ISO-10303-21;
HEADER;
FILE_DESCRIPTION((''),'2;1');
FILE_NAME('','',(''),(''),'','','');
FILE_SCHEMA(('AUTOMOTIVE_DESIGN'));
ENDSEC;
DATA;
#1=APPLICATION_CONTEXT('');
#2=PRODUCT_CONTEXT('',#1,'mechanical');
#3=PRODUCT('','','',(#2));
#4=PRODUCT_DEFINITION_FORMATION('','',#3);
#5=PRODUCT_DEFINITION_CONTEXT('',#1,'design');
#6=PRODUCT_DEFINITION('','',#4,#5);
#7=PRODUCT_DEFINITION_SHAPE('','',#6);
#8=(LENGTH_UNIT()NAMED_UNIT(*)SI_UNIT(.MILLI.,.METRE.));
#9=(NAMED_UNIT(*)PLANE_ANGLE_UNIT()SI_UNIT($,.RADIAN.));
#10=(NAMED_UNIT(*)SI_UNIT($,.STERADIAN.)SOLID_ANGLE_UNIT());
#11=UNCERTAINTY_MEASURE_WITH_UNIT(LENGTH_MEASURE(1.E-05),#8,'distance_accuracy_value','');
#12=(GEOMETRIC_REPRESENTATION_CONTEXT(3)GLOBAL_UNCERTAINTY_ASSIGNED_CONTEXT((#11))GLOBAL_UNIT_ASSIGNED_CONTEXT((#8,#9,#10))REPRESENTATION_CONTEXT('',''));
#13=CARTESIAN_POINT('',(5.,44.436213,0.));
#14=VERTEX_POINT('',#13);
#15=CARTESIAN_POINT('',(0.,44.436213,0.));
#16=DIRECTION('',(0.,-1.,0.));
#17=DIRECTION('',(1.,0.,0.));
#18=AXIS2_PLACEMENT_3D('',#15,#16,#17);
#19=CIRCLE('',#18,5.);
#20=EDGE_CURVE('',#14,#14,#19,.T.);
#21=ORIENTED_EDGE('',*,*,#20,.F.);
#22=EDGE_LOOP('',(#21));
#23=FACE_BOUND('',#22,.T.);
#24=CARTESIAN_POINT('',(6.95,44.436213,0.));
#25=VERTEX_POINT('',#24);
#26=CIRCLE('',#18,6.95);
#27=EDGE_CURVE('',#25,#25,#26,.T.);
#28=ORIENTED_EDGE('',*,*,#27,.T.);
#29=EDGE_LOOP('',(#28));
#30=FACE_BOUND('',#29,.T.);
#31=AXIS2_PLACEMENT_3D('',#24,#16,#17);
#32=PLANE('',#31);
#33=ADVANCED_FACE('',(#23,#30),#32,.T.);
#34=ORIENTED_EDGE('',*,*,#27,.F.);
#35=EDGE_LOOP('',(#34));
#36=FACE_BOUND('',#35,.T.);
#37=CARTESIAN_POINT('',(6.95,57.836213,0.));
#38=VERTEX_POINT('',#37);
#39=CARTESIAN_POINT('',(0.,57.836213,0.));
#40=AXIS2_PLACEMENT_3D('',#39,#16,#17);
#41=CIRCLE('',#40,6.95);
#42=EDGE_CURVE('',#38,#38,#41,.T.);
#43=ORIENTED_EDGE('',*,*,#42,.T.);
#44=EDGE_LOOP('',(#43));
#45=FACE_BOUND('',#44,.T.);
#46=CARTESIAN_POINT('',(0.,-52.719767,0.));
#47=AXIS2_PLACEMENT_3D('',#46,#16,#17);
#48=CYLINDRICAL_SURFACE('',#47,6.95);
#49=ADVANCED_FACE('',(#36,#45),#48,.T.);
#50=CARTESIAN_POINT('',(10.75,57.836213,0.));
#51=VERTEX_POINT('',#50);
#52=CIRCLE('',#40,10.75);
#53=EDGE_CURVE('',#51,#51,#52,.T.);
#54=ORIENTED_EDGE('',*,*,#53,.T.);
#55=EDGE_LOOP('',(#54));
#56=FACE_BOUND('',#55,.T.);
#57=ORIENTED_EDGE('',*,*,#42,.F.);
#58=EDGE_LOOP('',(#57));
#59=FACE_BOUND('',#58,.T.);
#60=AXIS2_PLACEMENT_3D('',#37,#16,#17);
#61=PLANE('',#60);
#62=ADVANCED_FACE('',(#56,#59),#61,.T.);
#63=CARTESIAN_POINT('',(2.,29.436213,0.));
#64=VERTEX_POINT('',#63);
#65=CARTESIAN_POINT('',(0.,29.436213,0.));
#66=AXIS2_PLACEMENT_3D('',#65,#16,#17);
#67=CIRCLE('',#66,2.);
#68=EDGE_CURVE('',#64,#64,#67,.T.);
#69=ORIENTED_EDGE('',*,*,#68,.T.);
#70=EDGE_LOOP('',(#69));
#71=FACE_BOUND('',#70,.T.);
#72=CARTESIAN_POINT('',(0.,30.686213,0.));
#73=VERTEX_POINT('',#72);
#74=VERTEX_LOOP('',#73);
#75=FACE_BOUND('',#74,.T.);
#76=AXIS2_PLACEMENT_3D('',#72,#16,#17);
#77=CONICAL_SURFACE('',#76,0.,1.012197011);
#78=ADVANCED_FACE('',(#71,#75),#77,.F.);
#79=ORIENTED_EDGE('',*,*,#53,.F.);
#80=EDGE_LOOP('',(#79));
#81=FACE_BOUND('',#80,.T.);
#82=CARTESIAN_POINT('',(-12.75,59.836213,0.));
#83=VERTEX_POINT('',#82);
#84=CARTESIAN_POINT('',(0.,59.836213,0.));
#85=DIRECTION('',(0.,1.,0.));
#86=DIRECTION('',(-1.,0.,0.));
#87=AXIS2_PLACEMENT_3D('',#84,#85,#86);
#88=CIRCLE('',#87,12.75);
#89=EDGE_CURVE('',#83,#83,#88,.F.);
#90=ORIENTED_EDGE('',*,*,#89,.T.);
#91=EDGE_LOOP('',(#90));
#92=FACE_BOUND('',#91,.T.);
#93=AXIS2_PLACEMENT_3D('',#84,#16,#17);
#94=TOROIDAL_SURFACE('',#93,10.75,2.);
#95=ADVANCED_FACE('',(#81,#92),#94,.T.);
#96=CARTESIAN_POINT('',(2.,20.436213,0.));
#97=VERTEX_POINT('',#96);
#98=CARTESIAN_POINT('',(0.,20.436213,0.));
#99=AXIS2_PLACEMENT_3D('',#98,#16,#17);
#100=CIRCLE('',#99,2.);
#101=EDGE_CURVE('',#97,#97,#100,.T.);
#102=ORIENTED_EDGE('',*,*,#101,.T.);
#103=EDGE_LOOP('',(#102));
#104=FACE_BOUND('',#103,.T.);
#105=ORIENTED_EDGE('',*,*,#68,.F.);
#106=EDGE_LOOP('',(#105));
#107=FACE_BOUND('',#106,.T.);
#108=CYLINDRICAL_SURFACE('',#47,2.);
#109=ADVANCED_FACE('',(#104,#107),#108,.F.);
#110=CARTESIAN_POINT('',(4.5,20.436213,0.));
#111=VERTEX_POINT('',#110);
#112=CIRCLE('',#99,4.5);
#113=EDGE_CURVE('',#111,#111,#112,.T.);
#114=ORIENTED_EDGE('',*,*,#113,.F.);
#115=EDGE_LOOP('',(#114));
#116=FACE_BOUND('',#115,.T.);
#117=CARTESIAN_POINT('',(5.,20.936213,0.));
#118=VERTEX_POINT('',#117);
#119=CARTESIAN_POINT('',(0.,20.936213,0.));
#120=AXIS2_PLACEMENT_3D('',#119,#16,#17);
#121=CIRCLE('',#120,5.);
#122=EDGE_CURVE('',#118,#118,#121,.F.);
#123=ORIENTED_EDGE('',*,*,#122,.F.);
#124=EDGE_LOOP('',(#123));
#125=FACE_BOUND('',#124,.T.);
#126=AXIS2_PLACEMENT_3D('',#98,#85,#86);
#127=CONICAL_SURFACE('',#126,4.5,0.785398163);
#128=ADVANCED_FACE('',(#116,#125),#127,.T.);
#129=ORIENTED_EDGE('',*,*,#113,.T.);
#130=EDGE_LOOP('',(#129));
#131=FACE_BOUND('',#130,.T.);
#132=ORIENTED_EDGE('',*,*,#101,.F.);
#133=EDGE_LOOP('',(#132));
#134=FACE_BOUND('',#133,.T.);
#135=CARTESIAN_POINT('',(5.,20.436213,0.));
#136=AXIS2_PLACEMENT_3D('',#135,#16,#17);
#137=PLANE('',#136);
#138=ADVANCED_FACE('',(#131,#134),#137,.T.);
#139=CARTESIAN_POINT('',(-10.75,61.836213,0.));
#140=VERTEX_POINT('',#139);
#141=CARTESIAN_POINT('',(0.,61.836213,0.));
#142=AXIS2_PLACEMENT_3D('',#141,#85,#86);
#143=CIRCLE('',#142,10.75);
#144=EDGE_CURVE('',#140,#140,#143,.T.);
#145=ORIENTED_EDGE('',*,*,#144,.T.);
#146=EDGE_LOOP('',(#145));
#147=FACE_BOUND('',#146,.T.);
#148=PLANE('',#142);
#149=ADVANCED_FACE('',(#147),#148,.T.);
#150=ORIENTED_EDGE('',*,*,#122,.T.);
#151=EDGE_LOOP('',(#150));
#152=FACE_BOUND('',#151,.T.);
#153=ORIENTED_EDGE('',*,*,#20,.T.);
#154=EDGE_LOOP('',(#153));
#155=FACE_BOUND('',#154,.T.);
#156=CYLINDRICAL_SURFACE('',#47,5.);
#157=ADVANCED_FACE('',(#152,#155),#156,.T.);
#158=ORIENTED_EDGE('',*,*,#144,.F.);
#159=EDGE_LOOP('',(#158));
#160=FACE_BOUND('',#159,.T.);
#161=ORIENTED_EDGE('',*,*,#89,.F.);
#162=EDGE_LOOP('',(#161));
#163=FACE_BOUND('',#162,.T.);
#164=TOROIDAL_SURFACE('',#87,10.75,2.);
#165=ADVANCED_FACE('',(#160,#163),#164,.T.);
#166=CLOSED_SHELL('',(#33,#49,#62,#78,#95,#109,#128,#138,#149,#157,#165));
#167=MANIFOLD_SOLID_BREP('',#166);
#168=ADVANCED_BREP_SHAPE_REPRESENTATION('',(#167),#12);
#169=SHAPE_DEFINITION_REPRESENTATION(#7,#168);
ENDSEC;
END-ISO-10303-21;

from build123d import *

# Parameters (mm, degrees)
FILETE1_R     = 2
CHANFRO1_SIZE = 0.5


with BuildPart() as part:
    # Esboço1 → Revolução1 (revolve)
    with BuildSketch(Plane.XY):
        Polygon((0, 61.836212625), (12.75, 61.836212625), (12.75, 57.836212625), (6.95, 57.836212625), (6.95, 44.436212625), (5, 44.436212625), (5, 20.436212625), (2, 20.436212625), (2, 29.436212625), (0, 30.686212625), align=None)
    revolve(axis=Axis((0, -52.719767442, 0), (0, 1, 0)))

    # Filete1
    filete1_edges = [part.edges().sort_by_distance(p)[0] for p in [
        (-12.75, 57.836212625, 0),
        (-12.75, 61.836212625, 0),
    ]]
    fillet(filete1_edges, radius=FILETE1_R - 0.0001)  # a hair under: the kernel refuses the full size

    # Chanfro1
    chanfro1_edges = [part.edges().sort_by_distance(p)[0] for p in [
        (-5, 20.436212625, 0),
    ]]
    chamfer(chanfro1_edges, length=CHANFRO1_SIZE)


solid = part.part
